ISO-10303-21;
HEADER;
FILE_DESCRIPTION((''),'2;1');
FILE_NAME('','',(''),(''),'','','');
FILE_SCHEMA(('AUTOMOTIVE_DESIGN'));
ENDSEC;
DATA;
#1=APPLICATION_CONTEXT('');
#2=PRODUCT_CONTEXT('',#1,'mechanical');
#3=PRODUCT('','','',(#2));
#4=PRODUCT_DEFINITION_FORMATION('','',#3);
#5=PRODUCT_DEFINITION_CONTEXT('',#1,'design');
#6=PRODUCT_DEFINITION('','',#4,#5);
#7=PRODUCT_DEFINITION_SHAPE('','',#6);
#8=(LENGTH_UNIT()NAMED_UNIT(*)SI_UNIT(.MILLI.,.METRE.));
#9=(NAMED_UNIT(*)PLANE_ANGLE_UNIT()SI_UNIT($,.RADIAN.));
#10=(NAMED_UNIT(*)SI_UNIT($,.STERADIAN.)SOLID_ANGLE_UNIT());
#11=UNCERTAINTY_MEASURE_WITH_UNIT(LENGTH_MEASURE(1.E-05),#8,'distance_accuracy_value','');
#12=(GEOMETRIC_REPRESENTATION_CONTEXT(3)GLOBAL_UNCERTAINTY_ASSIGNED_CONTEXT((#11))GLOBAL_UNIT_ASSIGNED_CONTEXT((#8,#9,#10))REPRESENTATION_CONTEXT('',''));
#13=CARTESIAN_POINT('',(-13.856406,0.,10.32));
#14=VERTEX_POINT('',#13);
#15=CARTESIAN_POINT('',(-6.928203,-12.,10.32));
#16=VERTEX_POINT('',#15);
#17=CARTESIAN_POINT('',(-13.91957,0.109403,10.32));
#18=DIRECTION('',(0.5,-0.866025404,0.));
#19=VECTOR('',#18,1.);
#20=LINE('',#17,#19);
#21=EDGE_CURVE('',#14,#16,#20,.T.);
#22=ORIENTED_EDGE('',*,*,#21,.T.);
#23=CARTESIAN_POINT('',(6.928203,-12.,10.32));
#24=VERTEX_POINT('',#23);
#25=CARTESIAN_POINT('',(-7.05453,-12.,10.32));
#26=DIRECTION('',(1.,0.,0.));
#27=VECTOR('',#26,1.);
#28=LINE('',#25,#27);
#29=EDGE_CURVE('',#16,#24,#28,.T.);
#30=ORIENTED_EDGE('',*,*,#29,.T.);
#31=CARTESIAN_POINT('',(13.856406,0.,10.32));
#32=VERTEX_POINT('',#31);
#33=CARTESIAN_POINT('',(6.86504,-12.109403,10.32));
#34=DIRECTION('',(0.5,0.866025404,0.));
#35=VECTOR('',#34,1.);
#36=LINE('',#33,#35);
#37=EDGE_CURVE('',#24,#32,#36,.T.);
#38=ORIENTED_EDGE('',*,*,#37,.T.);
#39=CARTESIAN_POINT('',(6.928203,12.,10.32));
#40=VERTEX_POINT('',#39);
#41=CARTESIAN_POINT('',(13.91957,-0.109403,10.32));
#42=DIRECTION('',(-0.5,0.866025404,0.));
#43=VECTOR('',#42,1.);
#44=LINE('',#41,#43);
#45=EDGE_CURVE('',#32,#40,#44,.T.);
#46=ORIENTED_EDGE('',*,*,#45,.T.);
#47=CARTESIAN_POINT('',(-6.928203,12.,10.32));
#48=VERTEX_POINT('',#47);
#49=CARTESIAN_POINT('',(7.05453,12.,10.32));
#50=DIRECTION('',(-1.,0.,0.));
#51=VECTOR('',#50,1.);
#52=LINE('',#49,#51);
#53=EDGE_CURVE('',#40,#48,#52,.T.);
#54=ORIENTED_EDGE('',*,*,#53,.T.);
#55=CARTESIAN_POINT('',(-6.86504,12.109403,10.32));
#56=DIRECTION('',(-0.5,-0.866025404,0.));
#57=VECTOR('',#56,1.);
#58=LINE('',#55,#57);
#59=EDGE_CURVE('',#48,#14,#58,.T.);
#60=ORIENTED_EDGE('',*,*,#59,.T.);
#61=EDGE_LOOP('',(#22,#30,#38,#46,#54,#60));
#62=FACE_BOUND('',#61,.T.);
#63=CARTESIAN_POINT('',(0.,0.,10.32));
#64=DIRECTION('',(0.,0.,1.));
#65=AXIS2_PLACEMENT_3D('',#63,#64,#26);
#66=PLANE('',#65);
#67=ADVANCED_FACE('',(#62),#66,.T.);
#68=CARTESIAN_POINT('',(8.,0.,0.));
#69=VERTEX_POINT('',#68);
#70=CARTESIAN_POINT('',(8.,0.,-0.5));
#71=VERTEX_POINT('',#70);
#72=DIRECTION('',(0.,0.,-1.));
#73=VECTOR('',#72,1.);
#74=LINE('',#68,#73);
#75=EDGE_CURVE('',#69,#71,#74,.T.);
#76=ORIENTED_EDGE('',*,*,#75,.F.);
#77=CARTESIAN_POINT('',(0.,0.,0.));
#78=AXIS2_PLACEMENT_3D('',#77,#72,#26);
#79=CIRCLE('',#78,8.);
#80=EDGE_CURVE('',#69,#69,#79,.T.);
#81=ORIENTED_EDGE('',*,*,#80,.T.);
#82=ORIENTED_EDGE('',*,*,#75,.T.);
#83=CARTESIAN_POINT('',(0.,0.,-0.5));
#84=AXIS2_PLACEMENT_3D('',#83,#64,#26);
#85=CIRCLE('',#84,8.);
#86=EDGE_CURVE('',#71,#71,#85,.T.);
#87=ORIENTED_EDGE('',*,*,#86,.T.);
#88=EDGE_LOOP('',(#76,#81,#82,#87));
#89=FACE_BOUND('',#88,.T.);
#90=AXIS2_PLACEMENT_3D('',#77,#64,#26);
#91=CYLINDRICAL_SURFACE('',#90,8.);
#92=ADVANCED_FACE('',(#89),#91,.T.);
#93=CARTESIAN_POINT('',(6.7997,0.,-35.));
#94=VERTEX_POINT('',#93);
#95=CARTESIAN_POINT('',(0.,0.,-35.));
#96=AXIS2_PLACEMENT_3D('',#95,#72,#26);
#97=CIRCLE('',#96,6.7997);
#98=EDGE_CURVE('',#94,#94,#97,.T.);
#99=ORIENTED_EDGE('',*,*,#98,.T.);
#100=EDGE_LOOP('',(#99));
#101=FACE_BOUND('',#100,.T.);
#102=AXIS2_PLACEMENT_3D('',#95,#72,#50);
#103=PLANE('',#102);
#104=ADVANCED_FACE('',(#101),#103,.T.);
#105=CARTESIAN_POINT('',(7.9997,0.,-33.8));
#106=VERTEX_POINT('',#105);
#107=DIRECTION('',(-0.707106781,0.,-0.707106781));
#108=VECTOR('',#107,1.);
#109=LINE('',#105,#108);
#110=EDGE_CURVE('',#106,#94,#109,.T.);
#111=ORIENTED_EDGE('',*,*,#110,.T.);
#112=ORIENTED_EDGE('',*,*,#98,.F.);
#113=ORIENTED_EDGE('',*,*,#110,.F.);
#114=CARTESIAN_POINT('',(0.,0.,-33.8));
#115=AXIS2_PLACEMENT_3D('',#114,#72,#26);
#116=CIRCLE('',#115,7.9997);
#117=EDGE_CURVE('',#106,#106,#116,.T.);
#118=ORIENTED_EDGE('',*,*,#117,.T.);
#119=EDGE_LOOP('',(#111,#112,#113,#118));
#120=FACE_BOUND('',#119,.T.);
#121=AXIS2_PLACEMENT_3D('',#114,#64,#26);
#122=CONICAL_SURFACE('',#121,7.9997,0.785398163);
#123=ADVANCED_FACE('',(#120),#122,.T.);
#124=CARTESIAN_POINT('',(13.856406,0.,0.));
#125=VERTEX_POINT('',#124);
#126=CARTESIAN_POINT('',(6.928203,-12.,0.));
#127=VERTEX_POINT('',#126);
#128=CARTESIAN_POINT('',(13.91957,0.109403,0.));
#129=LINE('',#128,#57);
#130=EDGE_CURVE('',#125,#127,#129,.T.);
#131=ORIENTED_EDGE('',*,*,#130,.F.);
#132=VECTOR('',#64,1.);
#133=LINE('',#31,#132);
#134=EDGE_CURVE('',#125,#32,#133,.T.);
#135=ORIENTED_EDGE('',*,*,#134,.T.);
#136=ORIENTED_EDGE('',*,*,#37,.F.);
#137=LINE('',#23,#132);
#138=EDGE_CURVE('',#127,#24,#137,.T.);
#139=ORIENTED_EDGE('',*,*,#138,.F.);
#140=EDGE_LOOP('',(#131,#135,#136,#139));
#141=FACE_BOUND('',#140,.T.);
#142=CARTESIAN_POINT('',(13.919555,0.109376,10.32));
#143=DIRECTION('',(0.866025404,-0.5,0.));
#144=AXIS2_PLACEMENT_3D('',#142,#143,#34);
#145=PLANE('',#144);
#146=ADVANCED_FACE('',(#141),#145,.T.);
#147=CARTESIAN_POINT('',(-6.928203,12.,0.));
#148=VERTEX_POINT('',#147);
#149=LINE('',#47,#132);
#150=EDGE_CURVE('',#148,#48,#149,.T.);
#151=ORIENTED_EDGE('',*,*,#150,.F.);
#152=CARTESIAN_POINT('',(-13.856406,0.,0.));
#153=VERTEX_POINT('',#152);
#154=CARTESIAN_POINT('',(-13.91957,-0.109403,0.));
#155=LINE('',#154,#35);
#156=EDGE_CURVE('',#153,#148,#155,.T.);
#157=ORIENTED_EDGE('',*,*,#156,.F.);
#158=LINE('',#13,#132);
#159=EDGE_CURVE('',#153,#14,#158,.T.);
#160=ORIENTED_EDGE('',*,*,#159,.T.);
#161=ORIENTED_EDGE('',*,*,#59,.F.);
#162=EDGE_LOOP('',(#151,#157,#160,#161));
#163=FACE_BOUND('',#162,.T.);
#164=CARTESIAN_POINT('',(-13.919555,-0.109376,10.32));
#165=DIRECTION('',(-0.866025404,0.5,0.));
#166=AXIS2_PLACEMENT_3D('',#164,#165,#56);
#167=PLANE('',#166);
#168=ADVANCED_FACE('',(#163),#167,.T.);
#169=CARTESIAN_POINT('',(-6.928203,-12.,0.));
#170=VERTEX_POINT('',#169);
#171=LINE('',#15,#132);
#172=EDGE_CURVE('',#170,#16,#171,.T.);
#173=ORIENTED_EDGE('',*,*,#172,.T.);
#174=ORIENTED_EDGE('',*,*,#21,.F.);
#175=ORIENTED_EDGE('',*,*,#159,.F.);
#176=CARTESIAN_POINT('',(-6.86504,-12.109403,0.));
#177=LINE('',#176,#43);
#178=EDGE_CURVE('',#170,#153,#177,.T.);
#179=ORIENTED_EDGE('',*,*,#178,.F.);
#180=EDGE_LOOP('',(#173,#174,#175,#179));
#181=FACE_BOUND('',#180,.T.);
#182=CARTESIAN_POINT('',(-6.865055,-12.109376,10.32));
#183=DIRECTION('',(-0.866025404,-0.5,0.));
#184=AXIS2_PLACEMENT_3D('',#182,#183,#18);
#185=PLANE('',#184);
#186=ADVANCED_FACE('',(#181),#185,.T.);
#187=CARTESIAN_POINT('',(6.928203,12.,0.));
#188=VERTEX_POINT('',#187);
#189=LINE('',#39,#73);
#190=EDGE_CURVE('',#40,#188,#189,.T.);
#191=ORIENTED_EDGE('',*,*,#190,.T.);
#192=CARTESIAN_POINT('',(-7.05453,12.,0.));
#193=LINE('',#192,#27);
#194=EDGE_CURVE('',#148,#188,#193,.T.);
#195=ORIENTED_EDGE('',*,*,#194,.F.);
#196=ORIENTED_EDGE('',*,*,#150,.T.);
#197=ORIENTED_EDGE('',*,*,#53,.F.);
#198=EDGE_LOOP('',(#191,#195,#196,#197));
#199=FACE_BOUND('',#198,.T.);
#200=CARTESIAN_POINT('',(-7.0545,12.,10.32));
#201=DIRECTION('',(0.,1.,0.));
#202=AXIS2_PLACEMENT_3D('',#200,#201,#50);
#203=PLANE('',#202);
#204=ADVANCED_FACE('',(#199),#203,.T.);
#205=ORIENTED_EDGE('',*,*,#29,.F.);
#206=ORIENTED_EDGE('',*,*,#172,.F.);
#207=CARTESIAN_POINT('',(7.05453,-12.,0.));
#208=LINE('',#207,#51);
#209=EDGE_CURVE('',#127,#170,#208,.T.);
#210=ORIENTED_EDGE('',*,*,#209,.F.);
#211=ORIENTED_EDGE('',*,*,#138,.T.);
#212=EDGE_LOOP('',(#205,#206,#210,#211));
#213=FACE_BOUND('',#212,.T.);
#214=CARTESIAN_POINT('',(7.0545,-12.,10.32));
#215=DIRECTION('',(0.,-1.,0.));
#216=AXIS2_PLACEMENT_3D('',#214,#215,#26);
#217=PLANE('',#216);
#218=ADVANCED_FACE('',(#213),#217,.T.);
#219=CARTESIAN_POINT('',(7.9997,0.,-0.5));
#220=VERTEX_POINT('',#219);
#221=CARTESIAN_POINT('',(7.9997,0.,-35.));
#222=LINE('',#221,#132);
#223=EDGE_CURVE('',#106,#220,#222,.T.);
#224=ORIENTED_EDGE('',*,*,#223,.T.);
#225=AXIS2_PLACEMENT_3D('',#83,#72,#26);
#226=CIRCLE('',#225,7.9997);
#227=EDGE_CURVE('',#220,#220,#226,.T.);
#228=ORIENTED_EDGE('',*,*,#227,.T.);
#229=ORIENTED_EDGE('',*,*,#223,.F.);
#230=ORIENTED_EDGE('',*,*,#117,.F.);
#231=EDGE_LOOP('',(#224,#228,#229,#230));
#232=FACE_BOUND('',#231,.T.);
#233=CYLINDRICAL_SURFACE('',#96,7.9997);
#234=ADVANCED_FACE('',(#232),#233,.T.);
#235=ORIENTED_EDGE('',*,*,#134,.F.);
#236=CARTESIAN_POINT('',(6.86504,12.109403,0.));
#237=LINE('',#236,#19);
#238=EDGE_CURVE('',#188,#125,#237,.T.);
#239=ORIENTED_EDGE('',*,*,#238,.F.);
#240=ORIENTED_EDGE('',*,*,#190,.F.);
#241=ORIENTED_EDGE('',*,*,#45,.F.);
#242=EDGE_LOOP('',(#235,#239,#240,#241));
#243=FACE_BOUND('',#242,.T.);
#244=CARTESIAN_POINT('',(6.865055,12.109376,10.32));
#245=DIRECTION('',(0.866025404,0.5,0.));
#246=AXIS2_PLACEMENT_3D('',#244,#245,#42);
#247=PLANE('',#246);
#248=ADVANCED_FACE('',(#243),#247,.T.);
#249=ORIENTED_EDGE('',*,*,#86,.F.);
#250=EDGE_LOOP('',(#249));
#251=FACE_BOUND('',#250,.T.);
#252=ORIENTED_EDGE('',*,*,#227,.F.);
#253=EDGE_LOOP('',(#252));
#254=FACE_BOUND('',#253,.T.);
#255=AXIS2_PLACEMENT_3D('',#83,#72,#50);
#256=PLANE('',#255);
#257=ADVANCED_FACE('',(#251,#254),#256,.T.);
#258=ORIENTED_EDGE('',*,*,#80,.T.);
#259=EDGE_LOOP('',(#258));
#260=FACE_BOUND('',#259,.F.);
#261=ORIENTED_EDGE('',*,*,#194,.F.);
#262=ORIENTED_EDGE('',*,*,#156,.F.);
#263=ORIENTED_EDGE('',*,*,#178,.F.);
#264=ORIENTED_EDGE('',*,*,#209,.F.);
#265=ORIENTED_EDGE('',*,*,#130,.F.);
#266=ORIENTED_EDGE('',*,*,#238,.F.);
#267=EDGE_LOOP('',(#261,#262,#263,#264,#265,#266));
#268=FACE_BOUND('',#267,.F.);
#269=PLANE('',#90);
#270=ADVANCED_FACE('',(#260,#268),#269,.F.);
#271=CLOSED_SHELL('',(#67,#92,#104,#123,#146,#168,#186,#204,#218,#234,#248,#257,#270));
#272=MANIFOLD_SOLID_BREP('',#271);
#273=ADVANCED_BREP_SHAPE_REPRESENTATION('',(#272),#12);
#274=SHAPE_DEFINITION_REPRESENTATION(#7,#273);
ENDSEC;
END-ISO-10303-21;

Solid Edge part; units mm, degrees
sketch "Sketch1" plane through (0, 0, 0) normal (0, 0, 1) x (1, 0, 0)
  circle A0 centre (0, 0) radius 13.92
  dimension "D1" = 27.84
extrude "Protrusion1" add sketch "Sketch1" along normal blind 10.32
sketch "Sketch2" plane through (0, 0, 0) normal (0, 0, -1) x (1, 0, 0)
  circle A0 centre (0, 0) radius 8
extrude "Protrusion2" add sketch "Sketch2" along normal blind 35
sketch "Sketch3" plane through (0, 0, -35) normal (0, 0, -1) x (1, 0, 0)
  circle A0 centre (0, 0) radius 7.9997
extrude "Cutout1" cut sketch "Sketch3" against normal blind 34.5 flip side to cut
chamfer "Chamfer_1" distance 1.2 angle 45 1 edges at (-7.9997, 0, -35)
sketch "Sketch4" plane through (0, 0, 10.32) normal (0, 0, 1) x (1, 0, 0)
  line L0 (-7.0545, 12) -> (7.0545, 12)
  dimension "D1" = 24
extrude "Cutout2" cut sketch "Sketch4" against normal up to next material side at (0, 12.05, 10.32)
pattern_circular "Pattern1" count 6 over 360 about axis through (0, 0, 10.32) along (0, 0, 1) of "Cutout2"
properties part number "24104691"
